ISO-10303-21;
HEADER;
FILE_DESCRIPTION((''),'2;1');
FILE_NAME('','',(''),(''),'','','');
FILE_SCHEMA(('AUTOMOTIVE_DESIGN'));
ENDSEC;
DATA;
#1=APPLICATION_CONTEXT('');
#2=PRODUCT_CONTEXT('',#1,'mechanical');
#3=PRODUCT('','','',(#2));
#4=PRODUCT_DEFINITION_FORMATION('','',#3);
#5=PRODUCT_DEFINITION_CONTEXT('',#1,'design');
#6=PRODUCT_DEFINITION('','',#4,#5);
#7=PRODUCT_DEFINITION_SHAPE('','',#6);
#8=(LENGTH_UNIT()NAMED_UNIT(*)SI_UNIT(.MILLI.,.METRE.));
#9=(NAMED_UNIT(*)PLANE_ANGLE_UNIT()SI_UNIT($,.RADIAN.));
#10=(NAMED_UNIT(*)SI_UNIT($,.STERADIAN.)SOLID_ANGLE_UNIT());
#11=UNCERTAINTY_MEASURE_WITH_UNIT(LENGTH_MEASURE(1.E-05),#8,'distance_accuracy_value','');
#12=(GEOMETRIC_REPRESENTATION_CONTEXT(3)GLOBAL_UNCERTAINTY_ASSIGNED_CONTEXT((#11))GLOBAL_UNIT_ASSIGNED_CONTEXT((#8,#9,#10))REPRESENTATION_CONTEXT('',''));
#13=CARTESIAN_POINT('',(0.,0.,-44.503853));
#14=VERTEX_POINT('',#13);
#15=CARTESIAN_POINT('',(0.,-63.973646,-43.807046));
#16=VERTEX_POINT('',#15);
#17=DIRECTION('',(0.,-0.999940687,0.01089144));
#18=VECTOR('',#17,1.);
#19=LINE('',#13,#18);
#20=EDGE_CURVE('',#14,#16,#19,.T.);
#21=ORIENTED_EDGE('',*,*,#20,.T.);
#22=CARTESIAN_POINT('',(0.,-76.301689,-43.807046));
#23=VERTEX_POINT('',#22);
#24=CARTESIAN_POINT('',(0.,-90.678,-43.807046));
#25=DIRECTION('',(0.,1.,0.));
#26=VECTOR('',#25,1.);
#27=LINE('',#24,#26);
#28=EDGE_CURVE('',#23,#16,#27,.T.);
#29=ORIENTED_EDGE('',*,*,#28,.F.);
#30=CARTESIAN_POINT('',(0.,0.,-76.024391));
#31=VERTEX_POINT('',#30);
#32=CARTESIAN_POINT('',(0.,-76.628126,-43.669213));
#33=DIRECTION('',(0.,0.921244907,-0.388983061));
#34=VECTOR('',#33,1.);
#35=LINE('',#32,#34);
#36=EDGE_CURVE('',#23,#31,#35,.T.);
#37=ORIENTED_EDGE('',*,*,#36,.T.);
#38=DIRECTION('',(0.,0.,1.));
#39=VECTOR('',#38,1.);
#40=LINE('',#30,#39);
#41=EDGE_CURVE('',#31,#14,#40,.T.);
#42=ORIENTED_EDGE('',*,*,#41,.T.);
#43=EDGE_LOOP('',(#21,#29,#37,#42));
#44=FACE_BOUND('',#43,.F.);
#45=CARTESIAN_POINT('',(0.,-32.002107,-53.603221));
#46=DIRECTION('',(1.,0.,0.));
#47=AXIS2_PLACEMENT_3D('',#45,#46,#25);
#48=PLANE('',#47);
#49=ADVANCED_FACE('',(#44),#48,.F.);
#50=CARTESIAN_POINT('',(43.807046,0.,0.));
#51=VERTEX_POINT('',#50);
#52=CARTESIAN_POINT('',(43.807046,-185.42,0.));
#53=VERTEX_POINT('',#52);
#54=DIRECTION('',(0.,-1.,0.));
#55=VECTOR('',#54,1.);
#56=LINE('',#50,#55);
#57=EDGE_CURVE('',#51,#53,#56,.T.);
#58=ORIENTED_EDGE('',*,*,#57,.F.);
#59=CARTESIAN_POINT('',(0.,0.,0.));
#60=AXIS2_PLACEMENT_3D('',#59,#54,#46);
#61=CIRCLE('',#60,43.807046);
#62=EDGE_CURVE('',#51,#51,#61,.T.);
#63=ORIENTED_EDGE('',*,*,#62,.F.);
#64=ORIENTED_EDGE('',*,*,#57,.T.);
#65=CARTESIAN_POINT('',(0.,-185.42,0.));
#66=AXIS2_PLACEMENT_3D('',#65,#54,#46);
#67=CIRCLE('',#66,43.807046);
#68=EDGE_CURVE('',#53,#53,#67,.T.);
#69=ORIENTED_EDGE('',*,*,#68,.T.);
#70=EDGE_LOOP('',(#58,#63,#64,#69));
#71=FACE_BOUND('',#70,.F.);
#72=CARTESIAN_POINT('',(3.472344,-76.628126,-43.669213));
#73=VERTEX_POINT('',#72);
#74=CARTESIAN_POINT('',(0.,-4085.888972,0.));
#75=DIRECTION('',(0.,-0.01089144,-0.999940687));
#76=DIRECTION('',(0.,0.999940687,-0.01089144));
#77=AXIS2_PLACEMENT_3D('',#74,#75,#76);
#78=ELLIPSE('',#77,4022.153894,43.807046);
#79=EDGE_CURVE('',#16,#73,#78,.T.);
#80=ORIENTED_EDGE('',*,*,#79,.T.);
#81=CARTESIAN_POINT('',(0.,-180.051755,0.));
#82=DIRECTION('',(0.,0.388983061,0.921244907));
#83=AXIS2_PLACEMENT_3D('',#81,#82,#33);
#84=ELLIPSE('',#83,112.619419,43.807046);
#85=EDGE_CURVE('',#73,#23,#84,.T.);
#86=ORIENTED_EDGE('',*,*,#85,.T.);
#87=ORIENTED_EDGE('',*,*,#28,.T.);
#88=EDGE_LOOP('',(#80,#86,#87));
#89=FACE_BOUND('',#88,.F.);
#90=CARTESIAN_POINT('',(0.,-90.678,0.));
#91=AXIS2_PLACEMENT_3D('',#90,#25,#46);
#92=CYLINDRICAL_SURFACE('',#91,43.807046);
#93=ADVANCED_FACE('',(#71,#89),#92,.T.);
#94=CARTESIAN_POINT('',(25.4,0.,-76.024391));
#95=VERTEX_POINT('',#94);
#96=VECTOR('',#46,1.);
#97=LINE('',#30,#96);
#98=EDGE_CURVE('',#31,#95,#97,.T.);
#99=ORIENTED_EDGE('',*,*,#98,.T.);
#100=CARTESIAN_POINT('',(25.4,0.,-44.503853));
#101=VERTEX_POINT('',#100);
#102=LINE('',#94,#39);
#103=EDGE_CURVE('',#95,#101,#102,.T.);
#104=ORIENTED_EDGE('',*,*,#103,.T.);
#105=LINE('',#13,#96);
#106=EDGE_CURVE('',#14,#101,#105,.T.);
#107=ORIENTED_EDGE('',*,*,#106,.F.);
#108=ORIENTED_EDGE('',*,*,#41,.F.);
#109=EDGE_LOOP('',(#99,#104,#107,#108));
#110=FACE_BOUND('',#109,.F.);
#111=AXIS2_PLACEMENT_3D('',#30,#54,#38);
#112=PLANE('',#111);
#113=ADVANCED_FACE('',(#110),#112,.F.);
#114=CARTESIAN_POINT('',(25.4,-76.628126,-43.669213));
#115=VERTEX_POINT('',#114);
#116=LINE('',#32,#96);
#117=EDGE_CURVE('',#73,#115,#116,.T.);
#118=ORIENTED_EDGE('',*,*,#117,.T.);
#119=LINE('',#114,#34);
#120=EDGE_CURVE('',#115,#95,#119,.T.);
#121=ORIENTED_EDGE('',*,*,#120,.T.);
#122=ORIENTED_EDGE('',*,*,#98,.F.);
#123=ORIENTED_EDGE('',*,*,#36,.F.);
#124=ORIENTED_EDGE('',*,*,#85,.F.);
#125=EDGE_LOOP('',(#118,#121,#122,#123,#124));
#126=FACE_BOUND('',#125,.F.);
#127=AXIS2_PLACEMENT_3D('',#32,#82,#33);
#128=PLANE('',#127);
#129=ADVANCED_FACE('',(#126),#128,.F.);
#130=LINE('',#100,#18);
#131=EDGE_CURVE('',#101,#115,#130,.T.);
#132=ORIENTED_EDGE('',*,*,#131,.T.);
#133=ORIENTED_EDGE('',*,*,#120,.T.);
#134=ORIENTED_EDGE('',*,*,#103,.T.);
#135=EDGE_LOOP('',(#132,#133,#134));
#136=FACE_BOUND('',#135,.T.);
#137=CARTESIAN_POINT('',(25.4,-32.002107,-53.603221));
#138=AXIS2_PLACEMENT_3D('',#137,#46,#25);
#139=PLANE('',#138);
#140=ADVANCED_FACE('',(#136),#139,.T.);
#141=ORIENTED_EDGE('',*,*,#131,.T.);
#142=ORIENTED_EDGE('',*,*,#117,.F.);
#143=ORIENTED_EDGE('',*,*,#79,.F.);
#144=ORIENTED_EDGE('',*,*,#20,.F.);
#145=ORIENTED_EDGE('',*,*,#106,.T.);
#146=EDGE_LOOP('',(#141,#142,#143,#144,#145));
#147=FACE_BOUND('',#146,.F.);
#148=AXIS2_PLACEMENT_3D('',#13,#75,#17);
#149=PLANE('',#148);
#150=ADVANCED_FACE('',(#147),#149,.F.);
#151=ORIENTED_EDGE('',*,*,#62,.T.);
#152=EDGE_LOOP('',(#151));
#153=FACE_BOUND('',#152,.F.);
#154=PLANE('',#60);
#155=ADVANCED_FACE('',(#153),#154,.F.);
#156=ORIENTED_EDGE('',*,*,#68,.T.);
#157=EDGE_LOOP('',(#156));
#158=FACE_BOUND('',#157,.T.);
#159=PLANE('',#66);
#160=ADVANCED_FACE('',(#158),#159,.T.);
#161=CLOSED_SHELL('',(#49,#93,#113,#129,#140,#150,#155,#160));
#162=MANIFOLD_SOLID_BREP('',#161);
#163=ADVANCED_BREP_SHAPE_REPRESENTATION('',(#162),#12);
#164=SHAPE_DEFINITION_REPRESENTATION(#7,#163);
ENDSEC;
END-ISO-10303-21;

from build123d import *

# Parameters (mm, degrees)
F0_R     = 43.8070462956
F1_DEPTH = 90.678
F2_DEPTH = 94.742
F7_DEPTH = 25.4


# Not quite as in the source:
# - the program builds the solid bodies; features that only make, move or delete a surface that nothing else refers to are left out


with BuildPart() as f1:
    # F0 (on Front) → F1 (new body)
    with BuildSketch(Plane.XZ):
        Circle(F0_R)
    extrude(amount=F1_DEPTH)

    # F2 (add): a face of the model
    f2_faces = [f1.faces().sort_by_distance(p)[0] for p in [
        (0, -90.678, 0),
    ]]
    extrude(f2_faces, amount=F2_DEPTH)

    # F4 (on Right) → F7 (join)
    with BuildSketch(Plane.YZ):
        Polygon((0, -44.503852725), (-76.628126204, -43.6692126095), (0, -76.0243907571), align=None)
    extrude(amount=F7_DEPTH)


solid = f1.part
